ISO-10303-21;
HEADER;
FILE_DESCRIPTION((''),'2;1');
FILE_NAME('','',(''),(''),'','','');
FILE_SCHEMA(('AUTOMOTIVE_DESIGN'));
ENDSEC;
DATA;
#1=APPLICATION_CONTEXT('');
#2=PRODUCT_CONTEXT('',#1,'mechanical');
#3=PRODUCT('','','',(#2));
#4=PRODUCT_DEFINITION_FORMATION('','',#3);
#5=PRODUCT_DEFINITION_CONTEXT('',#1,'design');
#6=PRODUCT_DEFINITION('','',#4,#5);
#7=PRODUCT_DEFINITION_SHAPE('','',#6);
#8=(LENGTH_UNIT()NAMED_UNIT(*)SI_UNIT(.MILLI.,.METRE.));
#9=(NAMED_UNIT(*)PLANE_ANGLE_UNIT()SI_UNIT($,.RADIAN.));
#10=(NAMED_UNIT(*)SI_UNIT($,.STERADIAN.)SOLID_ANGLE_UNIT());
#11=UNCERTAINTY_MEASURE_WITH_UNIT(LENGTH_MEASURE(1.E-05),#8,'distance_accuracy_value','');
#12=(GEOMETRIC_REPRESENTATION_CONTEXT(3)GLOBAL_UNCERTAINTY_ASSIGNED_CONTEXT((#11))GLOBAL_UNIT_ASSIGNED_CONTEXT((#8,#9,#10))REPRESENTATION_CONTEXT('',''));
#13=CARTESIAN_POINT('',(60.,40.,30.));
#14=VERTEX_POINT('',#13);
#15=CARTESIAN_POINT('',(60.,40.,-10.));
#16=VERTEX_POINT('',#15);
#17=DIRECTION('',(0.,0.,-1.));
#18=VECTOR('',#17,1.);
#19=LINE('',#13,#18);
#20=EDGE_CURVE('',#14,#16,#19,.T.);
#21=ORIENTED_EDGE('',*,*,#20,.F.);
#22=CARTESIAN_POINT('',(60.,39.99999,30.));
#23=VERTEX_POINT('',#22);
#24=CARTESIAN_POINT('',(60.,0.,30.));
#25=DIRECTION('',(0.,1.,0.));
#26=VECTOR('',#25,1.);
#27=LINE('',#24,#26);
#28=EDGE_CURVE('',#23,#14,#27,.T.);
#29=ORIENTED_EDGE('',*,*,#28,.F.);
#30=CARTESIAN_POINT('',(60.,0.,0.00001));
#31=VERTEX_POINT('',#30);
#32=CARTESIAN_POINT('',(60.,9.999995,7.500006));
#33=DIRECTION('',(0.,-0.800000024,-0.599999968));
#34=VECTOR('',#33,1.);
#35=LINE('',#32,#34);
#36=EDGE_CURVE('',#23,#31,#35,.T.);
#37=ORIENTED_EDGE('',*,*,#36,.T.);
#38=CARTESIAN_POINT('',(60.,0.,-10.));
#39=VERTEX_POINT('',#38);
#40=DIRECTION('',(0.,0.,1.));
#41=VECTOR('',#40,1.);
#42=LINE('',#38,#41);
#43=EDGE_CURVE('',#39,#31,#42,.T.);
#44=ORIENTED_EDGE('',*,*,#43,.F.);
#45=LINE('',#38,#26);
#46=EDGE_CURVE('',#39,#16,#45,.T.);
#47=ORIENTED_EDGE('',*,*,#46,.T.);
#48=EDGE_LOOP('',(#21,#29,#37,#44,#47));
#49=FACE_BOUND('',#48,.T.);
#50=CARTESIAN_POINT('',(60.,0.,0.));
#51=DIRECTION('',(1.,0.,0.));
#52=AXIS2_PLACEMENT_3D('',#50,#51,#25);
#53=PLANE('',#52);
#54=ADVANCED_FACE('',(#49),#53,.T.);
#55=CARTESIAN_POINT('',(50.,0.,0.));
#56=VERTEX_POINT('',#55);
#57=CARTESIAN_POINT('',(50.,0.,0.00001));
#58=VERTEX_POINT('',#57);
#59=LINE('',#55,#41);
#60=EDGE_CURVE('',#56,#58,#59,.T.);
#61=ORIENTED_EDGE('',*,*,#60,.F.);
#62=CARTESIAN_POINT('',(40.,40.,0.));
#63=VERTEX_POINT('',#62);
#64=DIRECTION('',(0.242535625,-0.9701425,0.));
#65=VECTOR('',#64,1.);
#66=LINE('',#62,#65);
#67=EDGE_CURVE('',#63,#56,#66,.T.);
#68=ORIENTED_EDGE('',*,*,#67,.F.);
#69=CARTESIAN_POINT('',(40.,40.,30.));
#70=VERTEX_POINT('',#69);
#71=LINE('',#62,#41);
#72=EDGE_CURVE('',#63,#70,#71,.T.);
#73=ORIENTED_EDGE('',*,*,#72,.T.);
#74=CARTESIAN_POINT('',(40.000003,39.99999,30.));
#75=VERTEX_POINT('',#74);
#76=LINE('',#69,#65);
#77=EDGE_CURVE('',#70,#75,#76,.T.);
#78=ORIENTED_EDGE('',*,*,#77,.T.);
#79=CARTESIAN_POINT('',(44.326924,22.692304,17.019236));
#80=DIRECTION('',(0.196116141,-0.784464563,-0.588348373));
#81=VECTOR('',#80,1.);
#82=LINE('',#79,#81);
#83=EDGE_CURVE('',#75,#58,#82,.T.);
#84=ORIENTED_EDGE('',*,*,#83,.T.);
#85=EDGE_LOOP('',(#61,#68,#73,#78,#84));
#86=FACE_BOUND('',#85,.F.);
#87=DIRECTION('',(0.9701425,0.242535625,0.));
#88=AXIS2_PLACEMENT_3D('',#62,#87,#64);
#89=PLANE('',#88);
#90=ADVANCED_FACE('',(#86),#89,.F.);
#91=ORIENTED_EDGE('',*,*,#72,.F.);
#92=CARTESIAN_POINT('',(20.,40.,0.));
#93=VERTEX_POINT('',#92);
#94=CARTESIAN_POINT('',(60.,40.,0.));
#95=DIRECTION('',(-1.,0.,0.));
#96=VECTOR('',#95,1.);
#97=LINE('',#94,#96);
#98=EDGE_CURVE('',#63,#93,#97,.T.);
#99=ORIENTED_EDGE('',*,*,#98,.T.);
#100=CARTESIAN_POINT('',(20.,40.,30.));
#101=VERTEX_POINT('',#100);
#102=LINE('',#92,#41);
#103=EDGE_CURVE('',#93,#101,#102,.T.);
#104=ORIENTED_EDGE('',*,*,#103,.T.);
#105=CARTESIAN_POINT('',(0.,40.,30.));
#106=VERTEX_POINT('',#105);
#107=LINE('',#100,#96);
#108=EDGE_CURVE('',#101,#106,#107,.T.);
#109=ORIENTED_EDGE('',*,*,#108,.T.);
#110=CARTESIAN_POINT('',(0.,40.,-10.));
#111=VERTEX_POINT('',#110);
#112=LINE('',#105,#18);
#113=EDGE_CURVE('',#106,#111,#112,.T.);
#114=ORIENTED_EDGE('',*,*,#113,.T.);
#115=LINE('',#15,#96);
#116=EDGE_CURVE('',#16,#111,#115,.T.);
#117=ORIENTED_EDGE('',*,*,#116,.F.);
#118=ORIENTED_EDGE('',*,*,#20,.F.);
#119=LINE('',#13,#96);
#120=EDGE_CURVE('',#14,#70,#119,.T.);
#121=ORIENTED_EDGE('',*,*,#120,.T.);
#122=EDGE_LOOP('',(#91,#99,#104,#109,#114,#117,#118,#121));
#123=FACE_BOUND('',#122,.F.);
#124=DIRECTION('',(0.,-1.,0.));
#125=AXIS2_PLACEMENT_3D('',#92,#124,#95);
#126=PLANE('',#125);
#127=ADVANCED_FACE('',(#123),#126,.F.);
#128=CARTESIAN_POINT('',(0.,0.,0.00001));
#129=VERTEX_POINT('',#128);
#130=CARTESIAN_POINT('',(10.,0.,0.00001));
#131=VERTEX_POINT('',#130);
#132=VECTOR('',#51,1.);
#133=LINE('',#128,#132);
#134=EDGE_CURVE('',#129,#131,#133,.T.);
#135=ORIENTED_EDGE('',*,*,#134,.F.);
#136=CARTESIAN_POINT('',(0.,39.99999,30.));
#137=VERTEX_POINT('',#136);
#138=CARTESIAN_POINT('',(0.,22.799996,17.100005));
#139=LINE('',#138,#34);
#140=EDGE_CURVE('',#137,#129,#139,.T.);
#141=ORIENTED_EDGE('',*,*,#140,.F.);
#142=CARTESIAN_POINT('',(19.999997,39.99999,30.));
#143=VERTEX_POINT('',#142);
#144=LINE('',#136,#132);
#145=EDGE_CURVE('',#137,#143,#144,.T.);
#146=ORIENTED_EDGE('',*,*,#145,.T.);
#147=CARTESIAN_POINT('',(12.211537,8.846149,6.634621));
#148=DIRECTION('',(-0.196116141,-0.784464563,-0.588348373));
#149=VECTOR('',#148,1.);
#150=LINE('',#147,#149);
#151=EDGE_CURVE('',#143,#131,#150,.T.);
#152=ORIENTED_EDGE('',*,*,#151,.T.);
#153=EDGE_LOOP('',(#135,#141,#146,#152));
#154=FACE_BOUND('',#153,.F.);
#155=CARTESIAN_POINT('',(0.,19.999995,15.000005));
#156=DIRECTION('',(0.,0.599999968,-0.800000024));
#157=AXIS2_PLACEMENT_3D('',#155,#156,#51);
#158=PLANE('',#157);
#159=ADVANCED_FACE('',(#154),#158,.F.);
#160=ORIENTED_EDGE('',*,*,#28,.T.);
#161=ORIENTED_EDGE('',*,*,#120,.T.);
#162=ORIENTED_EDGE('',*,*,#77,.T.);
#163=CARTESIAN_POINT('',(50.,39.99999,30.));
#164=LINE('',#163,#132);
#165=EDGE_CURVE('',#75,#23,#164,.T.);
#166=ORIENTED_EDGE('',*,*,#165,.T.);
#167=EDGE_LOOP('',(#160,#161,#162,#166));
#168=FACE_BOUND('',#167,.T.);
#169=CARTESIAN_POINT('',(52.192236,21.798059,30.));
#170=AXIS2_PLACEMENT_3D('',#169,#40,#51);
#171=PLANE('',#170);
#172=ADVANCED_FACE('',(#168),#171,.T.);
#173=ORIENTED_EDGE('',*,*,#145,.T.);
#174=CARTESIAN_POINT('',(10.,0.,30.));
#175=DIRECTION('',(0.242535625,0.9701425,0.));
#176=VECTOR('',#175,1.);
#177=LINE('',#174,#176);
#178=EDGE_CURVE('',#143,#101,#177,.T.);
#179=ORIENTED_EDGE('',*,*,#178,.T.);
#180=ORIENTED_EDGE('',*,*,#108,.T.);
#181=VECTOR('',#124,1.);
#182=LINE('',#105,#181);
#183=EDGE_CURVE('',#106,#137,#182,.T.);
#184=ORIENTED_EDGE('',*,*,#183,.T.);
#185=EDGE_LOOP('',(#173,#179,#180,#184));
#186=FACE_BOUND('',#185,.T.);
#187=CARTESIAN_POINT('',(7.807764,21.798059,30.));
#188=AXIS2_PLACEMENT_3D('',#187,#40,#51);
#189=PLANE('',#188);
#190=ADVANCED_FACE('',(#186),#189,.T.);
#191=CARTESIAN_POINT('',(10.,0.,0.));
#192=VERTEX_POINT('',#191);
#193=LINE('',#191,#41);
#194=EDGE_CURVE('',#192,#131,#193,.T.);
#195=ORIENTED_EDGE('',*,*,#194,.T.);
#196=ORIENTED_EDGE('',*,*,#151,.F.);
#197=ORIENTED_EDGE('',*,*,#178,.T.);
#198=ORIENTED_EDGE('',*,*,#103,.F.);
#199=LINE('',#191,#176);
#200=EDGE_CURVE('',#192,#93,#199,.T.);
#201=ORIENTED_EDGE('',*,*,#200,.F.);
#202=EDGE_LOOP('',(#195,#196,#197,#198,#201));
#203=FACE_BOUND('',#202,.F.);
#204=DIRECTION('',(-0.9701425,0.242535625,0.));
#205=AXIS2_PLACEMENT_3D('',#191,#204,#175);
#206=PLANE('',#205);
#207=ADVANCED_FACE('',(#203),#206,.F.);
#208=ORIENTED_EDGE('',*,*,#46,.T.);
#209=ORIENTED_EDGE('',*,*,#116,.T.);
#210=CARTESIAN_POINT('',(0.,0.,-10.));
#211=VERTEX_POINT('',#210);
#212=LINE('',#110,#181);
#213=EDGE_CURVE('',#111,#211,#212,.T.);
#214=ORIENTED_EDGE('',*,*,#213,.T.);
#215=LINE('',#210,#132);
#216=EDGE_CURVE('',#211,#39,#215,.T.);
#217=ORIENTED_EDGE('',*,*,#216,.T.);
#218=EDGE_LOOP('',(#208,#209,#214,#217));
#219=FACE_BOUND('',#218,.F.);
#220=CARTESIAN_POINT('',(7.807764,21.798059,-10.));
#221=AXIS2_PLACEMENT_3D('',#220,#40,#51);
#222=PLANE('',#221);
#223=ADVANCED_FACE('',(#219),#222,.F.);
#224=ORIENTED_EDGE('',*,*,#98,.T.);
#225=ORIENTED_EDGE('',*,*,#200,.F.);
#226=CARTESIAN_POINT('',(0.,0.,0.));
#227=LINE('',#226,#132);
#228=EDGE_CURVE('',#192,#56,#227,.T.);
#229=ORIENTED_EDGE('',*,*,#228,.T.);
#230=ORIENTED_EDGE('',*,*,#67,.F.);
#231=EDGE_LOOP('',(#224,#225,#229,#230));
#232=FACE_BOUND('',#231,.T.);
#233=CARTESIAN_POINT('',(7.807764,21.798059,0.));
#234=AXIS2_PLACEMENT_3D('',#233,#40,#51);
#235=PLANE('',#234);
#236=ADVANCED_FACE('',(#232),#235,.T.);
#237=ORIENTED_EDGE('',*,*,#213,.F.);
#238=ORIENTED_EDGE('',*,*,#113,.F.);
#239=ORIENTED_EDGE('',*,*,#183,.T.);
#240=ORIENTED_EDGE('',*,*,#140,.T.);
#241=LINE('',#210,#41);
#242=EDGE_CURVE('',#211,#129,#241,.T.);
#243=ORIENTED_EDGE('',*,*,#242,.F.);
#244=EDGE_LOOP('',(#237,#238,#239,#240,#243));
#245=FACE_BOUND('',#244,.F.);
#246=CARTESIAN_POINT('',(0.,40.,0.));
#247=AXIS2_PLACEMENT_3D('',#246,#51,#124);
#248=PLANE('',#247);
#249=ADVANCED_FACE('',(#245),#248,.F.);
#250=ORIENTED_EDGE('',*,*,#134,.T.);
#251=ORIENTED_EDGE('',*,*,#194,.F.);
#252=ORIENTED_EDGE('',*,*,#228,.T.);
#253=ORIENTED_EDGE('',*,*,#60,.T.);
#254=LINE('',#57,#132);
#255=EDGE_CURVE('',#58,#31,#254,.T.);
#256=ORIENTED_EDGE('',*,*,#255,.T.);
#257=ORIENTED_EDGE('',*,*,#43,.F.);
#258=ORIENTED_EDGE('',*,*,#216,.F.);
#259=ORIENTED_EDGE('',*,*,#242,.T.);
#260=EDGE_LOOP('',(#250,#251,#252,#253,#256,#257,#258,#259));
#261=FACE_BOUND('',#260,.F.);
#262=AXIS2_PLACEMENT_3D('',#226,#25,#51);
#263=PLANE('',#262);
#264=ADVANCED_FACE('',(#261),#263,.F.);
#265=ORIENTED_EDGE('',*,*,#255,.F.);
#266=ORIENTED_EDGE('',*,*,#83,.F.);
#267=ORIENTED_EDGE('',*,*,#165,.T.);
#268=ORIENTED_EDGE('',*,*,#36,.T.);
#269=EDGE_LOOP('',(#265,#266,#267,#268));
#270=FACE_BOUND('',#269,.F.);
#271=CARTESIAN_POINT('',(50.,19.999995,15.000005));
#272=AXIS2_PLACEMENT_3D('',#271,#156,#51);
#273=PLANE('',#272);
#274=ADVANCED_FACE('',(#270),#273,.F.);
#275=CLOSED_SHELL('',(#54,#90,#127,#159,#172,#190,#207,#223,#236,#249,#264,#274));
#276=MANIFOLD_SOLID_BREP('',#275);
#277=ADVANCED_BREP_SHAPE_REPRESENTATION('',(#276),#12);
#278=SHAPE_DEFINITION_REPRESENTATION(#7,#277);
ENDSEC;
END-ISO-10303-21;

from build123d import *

# Parameters (mm, degrees)
F1_DEPTH   = 10
F2_DEPTH   = 30
F3_SIZE2   = 29.99999
F3_SIZE    = 39.99999
F3_2_SIZE2 = 29.99999
F3_2_SIZE  = 39.99999


# Not quite as in the source:
# - a fillet or chamfer is up to 0.001 mm smaller than in the source, because OpenCascade refuses the exact size


with BuildPart() as f1:
    # F0 (on Top) → F1 (new body)
    with BuildSketch(Plane.XY):
        Polygon((0, 40), (0, 0), (10, 0), (20, 40), align=None)
        Polygon((20, 40), (10, 0), (50, 0), (40, 40), align=None)
        Polygon((40, 40), (50, 0), (60, 0), (60, 40), align=None)
    extrude(amount=-F1_DEPTH)

    # F0 (on Top) → F2 (join)
    with BuildSketch(Plane.XY):
        Polygon((0, 40), (0, 0), (10, 0), (20, 40), align=None)
        Polygon((40, 40), (50, 0), (60, 0), (60, 40), align=None)
    extrude(amount=F2_DEPTH)

    # F3 (size 40 and 30 in the source; OpenCascade refuses exactly that, so slightly less here)
    f3_edges = [f1.edges().sort_by_distance(p)[0] for p in [
        (5, 0, 30),
    ]]
    f3_side = f1.faces().sort_by_distance((7.777778, 22.222222, 30))[0]
    chamfer(f3_edges, length=F3_SIZE, length2=F3_SIZE2, reference=f3_side)

    # F3#2 (size 40 and 30 in the source; OpenCascade refuses exactly that, so slightly less here)
    f3_2_edges = [f1.edges().sort_by_distance(p)[0] for p in [
        (55, 0, 30),
    ]]
    f3_2_side = f1.faces().sort_by_distance((52.222222, 22.222222, 30))[0]
    chamfer(f3_2_edges, length=F3_2_SIZE, length2=F3_2_SIZE2, reference=f3_2_side)


solid = f1.part
